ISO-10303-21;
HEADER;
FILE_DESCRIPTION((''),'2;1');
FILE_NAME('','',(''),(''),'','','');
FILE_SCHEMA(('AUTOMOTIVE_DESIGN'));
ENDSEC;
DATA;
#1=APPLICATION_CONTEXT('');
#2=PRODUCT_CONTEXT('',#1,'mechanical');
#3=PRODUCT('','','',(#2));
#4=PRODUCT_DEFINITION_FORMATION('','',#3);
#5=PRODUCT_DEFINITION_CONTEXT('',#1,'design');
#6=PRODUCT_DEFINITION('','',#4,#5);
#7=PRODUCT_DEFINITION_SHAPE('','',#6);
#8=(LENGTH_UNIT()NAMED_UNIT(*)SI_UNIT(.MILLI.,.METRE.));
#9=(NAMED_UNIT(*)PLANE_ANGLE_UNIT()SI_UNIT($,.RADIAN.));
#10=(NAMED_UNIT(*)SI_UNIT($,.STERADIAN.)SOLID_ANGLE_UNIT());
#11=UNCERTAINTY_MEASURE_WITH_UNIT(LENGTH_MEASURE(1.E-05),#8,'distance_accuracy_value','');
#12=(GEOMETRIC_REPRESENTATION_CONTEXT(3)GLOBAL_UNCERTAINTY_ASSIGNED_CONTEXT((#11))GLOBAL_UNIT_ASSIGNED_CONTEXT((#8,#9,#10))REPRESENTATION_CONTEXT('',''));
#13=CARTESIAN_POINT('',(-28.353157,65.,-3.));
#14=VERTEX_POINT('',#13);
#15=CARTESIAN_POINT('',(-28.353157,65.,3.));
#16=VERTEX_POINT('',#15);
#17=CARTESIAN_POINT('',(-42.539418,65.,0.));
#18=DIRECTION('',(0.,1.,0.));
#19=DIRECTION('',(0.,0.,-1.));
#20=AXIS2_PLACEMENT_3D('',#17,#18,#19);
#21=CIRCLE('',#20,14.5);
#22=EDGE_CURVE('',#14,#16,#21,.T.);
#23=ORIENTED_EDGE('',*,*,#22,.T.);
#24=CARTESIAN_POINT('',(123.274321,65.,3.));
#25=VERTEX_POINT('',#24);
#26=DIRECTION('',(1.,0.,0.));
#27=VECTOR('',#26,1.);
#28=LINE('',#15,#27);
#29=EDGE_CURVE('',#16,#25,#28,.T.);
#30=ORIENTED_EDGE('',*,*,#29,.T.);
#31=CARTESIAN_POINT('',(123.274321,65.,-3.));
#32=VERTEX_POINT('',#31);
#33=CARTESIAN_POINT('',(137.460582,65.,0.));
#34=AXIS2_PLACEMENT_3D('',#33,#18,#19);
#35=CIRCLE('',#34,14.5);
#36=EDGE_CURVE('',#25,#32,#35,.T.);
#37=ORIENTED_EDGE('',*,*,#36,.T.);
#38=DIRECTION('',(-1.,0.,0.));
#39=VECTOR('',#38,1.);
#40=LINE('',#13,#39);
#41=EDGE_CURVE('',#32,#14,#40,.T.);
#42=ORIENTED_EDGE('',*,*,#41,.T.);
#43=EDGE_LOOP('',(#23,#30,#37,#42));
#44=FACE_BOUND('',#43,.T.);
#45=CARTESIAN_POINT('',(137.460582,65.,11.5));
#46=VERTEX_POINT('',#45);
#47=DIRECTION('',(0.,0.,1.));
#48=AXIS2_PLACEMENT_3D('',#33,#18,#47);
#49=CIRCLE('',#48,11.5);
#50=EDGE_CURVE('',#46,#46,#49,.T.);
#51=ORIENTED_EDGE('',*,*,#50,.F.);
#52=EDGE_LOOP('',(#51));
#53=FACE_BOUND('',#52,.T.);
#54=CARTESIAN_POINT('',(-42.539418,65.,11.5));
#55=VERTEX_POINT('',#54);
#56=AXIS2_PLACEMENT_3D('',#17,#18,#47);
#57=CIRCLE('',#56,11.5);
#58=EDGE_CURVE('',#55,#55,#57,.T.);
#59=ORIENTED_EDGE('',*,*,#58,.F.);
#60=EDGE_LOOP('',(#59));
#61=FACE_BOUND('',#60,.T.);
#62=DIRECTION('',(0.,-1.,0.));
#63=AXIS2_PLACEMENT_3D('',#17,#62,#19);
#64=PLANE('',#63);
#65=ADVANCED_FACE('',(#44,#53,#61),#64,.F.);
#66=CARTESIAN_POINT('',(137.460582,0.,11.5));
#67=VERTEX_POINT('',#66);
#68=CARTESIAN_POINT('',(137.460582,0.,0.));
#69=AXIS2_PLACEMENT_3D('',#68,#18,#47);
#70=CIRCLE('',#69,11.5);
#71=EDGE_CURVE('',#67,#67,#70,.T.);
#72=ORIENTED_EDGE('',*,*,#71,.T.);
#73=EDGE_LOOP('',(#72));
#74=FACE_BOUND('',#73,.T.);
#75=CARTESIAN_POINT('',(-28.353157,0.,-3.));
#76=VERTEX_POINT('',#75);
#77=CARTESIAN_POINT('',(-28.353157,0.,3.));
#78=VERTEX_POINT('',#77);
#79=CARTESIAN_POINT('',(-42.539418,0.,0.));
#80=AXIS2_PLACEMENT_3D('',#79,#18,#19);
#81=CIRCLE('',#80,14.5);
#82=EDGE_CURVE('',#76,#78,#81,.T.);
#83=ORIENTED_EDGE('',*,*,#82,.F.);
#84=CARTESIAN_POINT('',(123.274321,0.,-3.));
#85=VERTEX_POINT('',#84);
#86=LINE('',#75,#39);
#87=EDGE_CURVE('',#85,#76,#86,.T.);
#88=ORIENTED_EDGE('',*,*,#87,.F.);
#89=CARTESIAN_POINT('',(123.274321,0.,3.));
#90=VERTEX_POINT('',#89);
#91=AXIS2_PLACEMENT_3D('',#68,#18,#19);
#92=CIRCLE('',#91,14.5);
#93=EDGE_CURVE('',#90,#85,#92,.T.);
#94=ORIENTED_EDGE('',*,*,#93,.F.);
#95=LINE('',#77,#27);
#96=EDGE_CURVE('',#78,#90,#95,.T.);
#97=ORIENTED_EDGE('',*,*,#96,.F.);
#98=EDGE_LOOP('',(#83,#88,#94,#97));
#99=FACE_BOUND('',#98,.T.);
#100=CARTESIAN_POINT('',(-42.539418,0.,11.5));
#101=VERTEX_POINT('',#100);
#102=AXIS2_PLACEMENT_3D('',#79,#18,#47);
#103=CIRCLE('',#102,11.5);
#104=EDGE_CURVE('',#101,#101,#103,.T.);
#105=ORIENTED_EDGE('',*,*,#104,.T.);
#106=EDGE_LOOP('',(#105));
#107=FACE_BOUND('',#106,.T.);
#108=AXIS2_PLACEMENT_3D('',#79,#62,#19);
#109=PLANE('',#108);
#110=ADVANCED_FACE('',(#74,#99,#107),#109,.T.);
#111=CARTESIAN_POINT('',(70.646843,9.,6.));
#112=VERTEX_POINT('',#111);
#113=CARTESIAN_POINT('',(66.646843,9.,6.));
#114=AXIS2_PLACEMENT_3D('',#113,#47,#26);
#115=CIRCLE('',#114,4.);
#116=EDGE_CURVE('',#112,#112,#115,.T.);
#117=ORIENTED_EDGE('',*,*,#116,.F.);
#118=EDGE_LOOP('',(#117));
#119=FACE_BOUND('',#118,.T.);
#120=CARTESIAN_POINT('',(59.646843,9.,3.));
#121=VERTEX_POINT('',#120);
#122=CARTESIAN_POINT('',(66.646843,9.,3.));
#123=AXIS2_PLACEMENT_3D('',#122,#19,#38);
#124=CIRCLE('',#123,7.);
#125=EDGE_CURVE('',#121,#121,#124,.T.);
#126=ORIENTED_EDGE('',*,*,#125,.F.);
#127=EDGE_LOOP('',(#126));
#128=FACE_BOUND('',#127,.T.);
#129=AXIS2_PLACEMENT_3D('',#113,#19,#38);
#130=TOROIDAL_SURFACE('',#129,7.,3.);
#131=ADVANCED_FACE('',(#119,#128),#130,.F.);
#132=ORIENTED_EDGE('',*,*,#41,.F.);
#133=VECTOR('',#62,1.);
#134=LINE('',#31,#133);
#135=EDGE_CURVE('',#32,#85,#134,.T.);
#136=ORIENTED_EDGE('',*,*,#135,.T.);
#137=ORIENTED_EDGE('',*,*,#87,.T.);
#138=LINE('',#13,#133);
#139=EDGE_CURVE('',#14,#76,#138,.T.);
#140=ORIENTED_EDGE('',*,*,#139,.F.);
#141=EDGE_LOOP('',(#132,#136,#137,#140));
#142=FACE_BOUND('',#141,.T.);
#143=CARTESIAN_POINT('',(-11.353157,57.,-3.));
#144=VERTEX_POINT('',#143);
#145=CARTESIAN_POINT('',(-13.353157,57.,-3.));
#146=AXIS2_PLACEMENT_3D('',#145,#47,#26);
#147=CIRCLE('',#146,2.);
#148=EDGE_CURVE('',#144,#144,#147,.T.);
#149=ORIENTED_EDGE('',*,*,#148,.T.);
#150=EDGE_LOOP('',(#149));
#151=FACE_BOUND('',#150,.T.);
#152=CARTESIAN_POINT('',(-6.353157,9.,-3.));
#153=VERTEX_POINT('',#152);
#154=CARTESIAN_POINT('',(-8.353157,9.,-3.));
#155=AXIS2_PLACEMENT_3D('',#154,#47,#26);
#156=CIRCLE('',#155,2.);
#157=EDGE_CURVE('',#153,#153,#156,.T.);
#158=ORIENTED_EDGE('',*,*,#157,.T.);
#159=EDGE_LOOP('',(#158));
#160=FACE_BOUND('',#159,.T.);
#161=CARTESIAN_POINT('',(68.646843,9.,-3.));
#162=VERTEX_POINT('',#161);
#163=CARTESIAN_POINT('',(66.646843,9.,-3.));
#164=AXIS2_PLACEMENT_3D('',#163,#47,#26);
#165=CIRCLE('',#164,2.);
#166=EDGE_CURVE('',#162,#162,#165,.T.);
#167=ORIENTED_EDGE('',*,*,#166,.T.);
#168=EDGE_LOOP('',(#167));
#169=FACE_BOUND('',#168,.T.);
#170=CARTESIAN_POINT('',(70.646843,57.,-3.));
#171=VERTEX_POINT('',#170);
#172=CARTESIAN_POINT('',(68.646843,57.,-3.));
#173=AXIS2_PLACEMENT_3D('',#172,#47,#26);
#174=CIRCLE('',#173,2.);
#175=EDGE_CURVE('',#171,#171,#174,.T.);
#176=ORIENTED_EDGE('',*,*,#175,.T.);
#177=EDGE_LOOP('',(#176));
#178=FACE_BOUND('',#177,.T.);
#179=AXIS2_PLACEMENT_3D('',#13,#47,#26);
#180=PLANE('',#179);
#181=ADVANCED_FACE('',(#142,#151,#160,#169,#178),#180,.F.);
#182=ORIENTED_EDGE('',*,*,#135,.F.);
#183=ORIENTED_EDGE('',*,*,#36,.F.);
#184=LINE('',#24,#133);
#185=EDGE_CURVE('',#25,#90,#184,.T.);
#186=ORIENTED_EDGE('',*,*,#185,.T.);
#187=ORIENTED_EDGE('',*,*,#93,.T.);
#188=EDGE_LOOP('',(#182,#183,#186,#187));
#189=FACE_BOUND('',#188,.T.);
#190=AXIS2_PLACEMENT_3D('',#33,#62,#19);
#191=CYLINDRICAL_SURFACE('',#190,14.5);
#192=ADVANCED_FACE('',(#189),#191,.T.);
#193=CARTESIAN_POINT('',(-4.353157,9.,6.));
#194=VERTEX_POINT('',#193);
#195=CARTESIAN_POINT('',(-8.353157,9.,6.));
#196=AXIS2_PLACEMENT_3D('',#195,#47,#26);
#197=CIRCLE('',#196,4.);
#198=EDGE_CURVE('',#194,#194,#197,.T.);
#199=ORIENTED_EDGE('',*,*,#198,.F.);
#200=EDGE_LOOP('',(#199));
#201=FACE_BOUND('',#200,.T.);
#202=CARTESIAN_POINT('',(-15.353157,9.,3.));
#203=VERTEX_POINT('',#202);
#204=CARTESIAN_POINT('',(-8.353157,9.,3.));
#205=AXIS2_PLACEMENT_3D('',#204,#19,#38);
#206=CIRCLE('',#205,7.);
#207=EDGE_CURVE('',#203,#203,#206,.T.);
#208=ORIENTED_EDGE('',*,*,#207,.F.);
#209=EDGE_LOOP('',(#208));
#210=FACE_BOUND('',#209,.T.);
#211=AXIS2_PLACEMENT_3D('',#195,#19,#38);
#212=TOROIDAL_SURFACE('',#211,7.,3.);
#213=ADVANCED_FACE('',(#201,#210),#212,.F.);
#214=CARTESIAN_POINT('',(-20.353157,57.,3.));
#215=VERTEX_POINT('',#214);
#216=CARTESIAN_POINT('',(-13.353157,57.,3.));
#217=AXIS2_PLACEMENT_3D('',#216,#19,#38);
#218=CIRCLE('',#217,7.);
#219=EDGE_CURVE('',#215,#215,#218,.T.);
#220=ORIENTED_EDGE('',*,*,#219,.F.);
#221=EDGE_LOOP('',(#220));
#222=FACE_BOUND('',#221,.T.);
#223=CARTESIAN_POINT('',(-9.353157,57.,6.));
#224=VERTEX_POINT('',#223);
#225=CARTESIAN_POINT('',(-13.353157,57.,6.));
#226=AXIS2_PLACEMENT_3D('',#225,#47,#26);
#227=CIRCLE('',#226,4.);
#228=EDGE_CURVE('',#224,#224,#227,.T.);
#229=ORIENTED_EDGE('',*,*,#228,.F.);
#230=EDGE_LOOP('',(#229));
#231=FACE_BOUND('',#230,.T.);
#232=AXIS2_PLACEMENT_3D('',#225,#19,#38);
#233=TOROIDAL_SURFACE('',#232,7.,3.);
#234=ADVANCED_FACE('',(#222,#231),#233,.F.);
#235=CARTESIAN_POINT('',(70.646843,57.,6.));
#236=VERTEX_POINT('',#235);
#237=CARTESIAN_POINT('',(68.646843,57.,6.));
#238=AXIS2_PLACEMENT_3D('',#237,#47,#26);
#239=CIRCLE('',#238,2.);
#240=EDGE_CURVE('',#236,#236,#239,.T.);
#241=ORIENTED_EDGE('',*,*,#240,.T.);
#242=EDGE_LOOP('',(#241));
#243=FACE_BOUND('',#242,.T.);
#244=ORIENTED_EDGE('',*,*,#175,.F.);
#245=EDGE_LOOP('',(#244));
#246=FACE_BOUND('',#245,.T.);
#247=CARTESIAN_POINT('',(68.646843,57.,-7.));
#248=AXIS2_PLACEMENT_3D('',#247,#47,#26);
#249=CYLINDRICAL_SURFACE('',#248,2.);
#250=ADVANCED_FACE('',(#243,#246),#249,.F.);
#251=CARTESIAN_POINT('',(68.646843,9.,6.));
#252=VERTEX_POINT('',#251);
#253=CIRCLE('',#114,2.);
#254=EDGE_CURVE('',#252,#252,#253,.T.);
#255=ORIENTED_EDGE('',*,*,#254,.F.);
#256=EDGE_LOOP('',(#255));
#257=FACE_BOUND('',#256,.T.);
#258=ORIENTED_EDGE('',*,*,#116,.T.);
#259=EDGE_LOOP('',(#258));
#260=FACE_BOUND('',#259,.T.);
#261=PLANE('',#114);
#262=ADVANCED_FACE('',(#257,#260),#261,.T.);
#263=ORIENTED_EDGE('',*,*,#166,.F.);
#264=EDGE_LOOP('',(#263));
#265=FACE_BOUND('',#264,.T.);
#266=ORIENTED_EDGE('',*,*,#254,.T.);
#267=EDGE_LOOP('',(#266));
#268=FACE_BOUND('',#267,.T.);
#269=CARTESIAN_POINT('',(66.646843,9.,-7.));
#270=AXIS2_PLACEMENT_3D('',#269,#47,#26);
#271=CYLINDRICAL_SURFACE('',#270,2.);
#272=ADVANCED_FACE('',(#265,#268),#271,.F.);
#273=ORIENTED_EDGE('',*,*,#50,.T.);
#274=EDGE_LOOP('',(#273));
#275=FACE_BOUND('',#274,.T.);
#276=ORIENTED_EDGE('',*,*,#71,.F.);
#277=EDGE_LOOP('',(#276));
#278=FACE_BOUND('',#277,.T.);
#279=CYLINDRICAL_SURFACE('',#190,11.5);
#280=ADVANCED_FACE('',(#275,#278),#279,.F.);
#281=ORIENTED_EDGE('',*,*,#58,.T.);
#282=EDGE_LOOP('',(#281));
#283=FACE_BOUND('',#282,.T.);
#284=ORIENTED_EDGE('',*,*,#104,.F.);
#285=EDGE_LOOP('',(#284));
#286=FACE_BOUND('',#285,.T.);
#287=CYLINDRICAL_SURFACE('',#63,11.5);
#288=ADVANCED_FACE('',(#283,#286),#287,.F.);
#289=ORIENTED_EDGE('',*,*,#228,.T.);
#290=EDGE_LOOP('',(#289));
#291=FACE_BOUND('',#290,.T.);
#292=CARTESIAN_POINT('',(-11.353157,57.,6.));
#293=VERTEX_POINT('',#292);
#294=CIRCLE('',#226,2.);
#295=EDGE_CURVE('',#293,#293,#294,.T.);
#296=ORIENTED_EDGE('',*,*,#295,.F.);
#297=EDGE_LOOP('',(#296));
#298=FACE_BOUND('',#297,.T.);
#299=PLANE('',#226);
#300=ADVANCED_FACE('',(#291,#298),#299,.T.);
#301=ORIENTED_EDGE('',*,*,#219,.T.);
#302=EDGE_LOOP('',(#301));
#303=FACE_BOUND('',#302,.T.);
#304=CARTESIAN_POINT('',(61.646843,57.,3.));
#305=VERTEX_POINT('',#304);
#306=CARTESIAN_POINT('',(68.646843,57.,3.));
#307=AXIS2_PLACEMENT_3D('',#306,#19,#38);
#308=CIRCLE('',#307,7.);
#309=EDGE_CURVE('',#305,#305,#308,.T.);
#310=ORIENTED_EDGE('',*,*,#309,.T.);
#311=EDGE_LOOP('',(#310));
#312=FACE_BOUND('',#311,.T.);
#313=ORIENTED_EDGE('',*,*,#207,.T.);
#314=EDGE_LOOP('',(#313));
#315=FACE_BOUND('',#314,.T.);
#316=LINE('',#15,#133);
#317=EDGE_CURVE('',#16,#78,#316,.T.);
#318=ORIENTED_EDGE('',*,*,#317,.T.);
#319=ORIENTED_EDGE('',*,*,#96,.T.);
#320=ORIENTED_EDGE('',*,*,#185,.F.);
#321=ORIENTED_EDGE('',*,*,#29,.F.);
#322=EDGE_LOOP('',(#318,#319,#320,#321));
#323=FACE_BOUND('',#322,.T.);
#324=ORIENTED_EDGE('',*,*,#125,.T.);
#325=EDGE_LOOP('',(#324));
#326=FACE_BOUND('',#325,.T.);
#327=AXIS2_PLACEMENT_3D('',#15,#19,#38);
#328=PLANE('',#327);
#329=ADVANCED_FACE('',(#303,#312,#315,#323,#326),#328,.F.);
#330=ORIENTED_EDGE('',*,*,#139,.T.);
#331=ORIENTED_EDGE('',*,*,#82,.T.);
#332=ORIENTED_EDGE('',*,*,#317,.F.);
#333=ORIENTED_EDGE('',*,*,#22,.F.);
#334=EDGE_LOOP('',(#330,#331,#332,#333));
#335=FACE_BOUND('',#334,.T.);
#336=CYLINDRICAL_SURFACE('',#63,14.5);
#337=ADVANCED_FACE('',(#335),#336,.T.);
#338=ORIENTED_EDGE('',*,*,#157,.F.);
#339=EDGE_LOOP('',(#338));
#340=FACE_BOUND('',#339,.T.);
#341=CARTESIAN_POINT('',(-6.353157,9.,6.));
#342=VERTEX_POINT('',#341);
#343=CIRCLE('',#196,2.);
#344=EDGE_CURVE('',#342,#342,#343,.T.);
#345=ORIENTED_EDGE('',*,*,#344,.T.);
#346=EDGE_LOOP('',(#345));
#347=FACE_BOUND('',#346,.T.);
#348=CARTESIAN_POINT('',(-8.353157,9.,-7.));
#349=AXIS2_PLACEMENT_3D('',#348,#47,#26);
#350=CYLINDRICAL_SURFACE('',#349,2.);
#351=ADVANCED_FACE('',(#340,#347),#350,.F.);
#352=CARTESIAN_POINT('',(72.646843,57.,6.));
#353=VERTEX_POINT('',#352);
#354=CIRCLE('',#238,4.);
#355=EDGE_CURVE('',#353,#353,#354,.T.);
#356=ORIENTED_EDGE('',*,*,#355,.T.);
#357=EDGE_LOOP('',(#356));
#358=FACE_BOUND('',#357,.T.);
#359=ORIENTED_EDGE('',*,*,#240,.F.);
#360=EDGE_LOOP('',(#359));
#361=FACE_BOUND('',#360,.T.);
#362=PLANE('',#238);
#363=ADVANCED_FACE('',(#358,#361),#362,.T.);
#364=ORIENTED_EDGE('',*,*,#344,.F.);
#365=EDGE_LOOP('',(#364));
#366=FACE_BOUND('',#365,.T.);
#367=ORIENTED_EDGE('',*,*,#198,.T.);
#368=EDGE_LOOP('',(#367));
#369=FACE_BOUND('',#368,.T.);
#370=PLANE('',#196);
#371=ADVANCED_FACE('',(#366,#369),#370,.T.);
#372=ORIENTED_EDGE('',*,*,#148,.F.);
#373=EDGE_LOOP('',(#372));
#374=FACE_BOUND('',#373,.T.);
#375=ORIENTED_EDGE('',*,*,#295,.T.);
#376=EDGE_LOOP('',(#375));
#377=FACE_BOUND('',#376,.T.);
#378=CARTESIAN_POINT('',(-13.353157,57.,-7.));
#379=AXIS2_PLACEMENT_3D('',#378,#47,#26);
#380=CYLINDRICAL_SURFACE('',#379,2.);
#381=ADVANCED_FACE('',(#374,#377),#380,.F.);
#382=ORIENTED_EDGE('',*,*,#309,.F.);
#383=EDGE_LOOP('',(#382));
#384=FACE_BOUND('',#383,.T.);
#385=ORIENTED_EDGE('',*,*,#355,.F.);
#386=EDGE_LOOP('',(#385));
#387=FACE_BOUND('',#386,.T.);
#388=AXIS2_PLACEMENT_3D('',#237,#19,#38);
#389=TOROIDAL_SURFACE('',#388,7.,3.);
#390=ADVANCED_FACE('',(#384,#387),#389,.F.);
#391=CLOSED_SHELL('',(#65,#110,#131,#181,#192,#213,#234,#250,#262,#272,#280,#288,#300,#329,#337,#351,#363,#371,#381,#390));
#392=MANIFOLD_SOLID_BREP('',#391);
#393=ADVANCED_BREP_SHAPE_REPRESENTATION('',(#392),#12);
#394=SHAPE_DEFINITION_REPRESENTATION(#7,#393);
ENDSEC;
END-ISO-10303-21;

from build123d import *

# Parameters (mm, degrees)
SKETCH1_R           = 11.5
BOSS_EXTRUDE1_DEPTH = 65
SKETCH2_R           = 2
CUT_EXTRUDE1_DEPTH  = 10
BOSS_EXTRUDE2_START = 3
SKETCH3_R           = 4
SKETCH3_R_2         = 2
BOSS_EXTRUDE2_DEPTH = 3
FILLET1_R           = 3


with BuildPart() as part:
    # Sketch1 → Boss-Extrude1 (new body)
    with BuildSketch(Plane(origin=(0, 0, 0), x_dir=(1, 0, 0), z_dir=(0, 1, 0))):
        with BuildLine():
            Line((-28.353157483, 3), (123.274320599, 3))
            ThreePointArc((123.274320599, 3), (151.960581558, 0), (123.274320599, -3))
            Line((123.274320599, -3), (-28.353157483, -3))
            ThreePointArc((-28.353157483, -3), (-57.039418442, 0), (-28.353157483, 3))
        make_face()
        with Locations(Location((-42.539418442, 0, 0), (0, 0, 270))):
            Circle(SKETCH1_R, mode=Mode.SUBTRACT)
        with Locations(Location((137.460581558, 0, 0), (0, 0, 270))):
            Circle(SKETCH1_R, mode=Mode.SUBTRACT)
    extrude(amount=BOSS_EXTRUDE1_DEPTH)

    # Sketch2 → Cut-Extrude1 (cut)
    with BuildSketch(Plane.XY.offset(3)):
        with Locations((-13.353157483, 57)):
            Circle(SKETCH2_R)
        with Locations((-8.353157483, 9)):
            Circle(SKETCH2_R)
        with Locations((66.646842517, 9)):
            Circle(SKETCH2_R)
        with Locations((68.646842517, 57)):
            Circle(SKETCH2_R)
    extrude(amount=-CUT_EXTRUDE1_DEPTH, mode=Mode.SUBTRACT)

    # Sketch3 → Boss-Extrude2 (add)
    # profile 1 of 4: a face of its own
    with BuildSketch(Plane.XY.offset(3).offset(BOSS_EXTRUDE2_START)):
        with Locations(Location((-13.353157483, 57, 0), (0, 0, 180))):
            Circle(SKETCH3_R)
        with Locations((-13.353157483, 57)):
            Circle(SKETCH3_R_2, mode=Mode.SUBTRACT)
    # profile 2 of 4: a face of its own
    with BuildSketch(Plane.XY.offset(3).offset(BOSS_EXTRUDE2_START)):
        with Locations(Location((68.646842517, 57, 0), (0, 0, 180))):
            Circle(SKETCH3_R)
        with Locations((68.646842517, 57)):
            Circle(SKETCH3_R_2, mode=Mode.SUBTRACT)
    # profile 3 of 4: a face of its own
    with BuildSketch(Plane.XY.offset(3).offset(BOSS_EXTRUDE2_START)):
        with Locations(Location((-8.353157483, 9, 0), (0, 0, 180))):
            Circle(SKETCH3_R)
        with Locations((-8.353157483, 9)):
            Circle(SKETCH3_R_2, mode=Mode.SUBTRACT)
    # profile 4 of 4: a face of its own
    with BuildSketch(Plane.XY.offset(3).offset(BOSS_EXTRUDE2_START)):
        with Locations(Location((66.646842517, 9, 0), (0, 0, 180))):
            Circle(SKETCH3_R)
        with Locations((66.646842517, 9)):
            Circle(SKETCH3_R_2, mode=Mode.SUBTRACT)
    extrude(amount=-BOSS_EXTRUDE2_DEPTH)

    # Fillet1
    fillet1_edges = [part.edges().sort_by_distance(p)[0] for p in [
        (-9.353157483, 57, 3),
        (72.646842517, 57, 3),
        (-4.353157483, 9, 3),
        (70.646842517, 9, 3),
    ]]
    fillet(fillet1_edges, radius=FILLET1_R - 0.0001)  # a hair under: the kernel refuses the full size


solid = part.part
